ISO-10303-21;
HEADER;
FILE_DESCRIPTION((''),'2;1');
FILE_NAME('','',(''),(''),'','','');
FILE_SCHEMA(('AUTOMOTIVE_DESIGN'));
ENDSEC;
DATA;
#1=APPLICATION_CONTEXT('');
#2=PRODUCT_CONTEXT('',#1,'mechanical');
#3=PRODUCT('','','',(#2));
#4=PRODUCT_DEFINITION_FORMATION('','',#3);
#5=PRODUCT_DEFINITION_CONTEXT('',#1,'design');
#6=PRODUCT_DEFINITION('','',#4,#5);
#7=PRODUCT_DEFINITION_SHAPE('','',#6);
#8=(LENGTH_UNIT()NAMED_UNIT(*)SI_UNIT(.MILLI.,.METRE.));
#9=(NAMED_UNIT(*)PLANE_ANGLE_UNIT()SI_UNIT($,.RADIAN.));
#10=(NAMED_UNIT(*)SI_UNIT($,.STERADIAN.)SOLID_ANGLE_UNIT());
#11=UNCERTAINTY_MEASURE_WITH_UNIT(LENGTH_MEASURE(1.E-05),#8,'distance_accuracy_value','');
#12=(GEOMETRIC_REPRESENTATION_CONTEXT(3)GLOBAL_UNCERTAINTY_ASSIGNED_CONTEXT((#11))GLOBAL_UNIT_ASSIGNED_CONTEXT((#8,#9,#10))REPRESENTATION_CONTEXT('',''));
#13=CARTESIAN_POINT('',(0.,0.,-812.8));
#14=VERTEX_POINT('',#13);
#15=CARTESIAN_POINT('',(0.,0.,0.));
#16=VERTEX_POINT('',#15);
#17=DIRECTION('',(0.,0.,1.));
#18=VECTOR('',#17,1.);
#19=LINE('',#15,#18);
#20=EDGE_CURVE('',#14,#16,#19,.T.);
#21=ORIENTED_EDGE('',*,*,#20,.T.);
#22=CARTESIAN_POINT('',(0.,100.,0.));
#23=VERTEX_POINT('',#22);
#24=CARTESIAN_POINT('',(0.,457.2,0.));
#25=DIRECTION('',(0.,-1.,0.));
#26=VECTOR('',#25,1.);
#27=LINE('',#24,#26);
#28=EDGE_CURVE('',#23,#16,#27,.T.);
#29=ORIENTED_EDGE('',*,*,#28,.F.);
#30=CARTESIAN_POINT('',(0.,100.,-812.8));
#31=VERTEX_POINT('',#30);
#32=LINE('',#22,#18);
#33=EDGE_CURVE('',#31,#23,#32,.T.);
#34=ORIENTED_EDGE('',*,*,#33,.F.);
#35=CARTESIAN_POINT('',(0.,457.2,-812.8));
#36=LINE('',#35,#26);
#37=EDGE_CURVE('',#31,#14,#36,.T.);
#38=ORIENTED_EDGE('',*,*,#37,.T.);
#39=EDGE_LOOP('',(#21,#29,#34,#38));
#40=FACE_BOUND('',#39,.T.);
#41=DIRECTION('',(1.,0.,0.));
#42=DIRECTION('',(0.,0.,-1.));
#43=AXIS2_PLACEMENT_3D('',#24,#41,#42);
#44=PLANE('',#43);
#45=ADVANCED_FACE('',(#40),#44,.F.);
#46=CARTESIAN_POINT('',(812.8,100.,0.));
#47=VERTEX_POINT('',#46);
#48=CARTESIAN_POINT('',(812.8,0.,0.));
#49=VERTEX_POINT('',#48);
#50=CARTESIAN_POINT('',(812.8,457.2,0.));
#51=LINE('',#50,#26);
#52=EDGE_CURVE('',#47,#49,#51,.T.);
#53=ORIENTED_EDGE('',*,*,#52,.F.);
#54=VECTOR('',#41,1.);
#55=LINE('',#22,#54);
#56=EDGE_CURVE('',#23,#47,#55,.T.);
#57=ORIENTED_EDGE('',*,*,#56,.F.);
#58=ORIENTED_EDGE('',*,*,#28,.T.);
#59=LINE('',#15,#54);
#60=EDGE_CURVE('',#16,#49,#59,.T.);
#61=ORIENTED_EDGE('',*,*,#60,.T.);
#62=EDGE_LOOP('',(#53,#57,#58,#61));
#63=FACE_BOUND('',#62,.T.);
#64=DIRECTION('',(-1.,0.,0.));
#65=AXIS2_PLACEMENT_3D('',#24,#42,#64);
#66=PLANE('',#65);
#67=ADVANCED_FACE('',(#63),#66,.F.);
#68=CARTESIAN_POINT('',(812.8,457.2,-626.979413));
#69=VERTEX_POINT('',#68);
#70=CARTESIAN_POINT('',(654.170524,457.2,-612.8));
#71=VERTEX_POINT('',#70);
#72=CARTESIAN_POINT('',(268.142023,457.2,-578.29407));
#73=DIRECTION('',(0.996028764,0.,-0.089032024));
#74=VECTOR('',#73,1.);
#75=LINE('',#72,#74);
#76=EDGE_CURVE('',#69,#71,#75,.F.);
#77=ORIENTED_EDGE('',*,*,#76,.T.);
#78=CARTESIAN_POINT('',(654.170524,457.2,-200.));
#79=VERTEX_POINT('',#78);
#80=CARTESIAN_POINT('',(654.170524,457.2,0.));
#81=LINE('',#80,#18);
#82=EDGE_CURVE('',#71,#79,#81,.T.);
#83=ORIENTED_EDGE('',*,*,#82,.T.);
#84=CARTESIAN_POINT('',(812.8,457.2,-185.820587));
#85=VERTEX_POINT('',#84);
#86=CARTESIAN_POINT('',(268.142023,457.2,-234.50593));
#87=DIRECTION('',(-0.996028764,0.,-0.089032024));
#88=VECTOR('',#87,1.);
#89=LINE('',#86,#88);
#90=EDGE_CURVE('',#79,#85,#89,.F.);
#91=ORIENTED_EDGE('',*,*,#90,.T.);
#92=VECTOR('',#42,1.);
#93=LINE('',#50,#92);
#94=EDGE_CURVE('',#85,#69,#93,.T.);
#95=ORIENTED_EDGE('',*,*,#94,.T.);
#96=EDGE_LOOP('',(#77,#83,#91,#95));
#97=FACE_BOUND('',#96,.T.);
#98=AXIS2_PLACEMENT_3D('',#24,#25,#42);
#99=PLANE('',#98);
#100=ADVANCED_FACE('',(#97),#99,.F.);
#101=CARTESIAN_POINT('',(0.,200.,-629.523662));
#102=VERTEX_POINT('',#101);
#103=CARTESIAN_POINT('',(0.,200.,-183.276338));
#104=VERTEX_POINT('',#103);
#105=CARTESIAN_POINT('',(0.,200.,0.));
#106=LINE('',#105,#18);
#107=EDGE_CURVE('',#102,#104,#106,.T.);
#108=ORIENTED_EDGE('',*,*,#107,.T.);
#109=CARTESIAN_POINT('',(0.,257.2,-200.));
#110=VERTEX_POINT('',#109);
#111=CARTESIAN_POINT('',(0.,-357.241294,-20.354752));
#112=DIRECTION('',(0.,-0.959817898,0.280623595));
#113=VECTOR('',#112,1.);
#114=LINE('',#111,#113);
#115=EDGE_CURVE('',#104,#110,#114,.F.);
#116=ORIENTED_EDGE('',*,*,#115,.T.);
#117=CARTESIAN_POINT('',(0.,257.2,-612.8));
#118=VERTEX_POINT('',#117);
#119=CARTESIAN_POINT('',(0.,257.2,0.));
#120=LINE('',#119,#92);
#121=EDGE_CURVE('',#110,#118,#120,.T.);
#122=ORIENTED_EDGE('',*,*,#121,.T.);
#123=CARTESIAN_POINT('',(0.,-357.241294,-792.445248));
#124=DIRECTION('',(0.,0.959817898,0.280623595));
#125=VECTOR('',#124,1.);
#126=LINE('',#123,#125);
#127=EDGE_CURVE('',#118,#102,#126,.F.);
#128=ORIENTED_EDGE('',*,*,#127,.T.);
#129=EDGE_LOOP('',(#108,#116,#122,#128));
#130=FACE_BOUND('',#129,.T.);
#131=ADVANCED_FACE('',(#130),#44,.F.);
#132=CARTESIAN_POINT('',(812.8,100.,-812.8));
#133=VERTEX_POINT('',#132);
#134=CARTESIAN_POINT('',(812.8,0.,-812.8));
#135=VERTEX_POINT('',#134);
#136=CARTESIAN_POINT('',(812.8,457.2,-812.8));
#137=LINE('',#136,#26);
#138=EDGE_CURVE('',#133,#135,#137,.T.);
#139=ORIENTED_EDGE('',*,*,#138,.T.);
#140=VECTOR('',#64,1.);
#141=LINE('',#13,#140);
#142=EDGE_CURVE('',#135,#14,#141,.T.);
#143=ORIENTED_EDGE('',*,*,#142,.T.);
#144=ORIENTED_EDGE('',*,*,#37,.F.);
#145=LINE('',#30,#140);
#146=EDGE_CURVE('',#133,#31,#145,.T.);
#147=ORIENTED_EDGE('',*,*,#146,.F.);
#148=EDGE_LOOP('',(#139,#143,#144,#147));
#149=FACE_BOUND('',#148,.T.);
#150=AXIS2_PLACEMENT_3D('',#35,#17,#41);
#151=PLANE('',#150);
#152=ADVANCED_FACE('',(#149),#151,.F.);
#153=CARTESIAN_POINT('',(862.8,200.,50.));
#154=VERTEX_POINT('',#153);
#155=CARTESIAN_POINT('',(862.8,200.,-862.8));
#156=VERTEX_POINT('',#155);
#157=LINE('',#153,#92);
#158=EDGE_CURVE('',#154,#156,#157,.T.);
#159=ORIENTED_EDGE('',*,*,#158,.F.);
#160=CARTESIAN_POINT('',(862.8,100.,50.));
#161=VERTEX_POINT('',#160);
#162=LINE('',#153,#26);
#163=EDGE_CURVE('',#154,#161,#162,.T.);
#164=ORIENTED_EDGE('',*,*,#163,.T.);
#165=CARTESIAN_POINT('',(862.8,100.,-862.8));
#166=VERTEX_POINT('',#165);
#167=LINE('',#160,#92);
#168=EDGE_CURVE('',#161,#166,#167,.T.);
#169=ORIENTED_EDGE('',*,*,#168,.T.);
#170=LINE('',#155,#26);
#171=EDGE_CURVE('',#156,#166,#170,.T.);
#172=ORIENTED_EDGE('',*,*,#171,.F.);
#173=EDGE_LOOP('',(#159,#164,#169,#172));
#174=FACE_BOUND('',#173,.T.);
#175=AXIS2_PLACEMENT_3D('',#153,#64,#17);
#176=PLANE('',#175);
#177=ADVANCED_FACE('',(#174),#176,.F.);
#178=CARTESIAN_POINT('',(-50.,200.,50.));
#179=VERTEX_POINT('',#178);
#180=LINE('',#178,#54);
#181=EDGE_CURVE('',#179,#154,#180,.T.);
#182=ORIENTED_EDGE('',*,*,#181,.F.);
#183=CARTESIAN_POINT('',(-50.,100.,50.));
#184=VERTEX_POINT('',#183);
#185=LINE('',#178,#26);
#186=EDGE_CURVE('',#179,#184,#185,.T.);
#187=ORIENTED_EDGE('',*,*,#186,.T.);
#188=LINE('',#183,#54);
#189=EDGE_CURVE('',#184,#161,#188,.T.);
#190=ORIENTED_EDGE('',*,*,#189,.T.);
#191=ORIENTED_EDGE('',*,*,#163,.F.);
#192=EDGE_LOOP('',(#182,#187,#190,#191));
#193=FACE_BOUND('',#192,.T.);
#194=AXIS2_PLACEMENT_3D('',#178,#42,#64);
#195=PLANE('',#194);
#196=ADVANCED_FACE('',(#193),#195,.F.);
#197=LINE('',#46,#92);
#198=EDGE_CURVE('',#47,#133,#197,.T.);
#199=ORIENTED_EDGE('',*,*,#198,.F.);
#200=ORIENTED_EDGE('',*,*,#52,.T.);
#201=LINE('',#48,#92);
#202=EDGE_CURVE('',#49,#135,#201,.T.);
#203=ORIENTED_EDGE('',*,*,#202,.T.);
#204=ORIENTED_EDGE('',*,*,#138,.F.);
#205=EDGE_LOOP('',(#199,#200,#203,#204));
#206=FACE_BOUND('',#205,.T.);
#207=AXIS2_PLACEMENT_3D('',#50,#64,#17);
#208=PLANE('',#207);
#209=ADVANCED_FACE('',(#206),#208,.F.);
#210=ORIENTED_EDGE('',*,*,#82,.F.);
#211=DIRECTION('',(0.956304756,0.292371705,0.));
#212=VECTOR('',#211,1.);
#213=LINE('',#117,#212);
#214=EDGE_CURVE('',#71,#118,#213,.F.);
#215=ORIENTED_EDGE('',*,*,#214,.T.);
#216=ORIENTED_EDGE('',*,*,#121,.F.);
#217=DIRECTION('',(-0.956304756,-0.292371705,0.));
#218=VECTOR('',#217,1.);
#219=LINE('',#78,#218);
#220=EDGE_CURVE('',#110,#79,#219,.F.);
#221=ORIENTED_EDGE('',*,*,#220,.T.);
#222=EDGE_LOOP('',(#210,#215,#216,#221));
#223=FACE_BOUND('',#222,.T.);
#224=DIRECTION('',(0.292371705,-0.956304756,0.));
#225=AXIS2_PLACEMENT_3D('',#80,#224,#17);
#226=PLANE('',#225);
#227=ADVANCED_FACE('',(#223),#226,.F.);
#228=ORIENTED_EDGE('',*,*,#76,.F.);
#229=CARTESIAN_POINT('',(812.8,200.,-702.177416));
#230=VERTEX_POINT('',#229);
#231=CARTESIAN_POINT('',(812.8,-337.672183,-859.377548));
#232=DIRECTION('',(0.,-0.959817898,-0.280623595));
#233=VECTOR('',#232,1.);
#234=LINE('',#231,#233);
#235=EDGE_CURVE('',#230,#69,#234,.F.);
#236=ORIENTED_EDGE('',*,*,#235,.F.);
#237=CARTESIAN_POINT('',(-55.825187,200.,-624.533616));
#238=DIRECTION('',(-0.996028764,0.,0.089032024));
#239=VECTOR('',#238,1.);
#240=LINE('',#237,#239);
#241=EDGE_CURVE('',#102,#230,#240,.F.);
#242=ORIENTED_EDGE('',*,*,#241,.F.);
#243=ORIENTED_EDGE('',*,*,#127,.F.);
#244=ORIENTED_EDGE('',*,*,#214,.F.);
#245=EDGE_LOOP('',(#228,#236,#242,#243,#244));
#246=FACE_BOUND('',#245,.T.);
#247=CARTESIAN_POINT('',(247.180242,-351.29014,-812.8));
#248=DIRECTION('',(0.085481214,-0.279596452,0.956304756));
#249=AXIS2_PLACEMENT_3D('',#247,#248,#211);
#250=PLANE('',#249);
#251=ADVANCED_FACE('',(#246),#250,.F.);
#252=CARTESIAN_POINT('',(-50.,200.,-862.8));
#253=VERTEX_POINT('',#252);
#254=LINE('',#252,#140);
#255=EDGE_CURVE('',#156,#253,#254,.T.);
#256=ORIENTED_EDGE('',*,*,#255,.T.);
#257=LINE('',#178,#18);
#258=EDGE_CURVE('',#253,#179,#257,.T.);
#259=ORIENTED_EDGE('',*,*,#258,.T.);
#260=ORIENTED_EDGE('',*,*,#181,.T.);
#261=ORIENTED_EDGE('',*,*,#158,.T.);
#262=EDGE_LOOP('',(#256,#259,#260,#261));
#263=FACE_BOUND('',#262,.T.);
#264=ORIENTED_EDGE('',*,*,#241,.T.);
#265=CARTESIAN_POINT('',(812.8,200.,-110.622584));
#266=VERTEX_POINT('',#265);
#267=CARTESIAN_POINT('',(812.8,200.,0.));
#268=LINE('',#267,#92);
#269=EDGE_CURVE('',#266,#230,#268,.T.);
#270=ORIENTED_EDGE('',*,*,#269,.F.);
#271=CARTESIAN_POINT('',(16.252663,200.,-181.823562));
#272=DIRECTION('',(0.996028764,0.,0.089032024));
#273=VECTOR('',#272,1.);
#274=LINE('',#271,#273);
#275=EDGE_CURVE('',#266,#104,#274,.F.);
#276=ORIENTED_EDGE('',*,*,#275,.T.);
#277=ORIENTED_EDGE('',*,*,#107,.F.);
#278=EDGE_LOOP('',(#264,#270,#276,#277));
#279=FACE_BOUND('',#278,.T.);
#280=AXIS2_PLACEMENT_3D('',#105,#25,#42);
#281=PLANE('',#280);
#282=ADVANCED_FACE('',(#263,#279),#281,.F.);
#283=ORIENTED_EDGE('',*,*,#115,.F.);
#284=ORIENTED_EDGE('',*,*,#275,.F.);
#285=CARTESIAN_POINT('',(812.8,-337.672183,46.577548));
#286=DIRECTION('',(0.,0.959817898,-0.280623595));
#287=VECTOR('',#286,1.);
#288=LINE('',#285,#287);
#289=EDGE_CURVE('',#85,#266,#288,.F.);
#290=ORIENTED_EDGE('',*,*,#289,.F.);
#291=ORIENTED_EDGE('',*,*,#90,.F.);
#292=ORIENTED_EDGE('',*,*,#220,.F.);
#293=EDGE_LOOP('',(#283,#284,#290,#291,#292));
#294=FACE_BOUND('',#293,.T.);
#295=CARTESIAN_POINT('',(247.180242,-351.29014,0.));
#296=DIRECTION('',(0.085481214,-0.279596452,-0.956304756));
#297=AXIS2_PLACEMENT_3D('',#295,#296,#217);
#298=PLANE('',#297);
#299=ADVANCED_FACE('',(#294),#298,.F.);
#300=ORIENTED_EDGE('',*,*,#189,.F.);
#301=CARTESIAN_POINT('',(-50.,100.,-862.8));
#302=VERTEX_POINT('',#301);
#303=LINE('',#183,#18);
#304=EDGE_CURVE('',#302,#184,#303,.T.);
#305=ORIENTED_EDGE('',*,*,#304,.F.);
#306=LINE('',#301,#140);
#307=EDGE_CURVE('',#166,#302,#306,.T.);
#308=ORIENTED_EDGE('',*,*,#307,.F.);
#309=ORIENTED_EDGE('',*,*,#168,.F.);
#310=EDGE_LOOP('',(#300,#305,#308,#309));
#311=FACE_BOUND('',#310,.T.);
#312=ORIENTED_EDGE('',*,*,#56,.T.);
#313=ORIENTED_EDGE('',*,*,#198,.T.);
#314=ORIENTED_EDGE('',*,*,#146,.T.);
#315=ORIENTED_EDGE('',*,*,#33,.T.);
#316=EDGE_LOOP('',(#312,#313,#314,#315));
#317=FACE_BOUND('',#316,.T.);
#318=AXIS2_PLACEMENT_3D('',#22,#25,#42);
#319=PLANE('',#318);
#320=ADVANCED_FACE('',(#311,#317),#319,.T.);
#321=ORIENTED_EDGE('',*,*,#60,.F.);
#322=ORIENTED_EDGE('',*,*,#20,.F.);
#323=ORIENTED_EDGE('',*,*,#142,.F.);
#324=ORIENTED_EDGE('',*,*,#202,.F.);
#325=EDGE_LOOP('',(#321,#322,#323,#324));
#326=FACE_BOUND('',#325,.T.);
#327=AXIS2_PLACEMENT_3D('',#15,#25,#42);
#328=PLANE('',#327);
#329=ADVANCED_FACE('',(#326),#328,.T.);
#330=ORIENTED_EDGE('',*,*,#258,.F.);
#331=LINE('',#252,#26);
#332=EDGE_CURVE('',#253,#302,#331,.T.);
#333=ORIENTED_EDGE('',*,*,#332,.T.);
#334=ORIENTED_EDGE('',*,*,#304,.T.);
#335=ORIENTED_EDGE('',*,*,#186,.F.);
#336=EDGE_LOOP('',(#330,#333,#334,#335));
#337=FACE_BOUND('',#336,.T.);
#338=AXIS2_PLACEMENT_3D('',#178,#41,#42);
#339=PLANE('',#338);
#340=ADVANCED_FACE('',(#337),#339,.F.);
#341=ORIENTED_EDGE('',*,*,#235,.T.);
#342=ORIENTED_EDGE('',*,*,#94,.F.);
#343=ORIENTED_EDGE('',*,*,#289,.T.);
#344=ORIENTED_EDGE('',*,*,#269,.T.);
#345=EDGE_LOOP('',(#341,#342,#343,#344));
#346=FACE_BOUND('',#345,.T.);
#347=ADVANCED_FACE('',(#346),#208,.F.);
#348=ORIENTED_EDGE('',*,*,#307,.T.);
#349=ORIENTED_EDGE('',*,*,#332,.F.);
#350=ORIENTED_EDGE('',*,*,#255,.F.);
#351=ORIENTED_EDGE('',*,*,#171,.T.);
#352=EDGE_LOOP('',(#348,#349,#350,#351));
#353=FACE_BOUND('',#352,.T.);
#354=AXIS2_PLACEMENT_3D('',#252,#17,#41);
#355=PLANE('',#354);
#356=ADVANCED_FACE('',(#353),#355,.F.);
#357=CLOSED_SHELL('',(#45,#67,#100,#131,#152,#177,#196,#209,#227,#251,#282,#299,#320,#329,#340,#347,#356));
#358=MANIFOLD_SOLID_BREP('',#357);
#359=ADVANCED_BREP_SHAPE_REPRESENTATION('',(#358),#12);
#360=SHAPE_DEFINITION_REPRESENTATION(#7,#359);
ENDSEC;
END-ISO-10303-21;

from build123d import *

# Parameters (mm, degrees)
SKETCH2_W           = 812.8
SKETCH2_H           = 812.8
BOSS_EXTRUDE1_DEPTH = 457.2
SKETCH3_W           = 912.8
SKETCH3_H           = 912.8
SKETCH3_W_2         = 812.8
SKETCH3_H_2         = 812.8
BOSS_EXTRUDE2_DEPTH = 100
CHAMFER4_SIZE       = 200
CHAMFER4_SIZE2      = 654.170523697
CHAMFER5_SIZE       = 200
CHAMFER5_SIZE_2     = 654.170523697


with BuildPart() as part:
    # Sketch2 → Boss-Extrude1 (new body)
    with BuildSketch(Plane(origin=(0, 0, 0), x_dir=(1, 0, 0), z_dir=(0, 1, 0))):
        with Locations((406.4, 406.4)):
            Rectangle(SKETCH2_W, SKETCH2_H)
    extrude(amount=BOSS_EXTRUDE1_DEPTH)

    # Sketch3 → Boss-Extrude2 (add)
    with BuildSketch(Plane(origin=(0, 100, 0), x_dir=(1, 0, 0), z_dir=(0, 1, 0))):
        with Locations((406.4, 406.4)):
            Rectangle(SKETCH3_W, SKETCH3_H)
        with Locations((406.4, 406.4)):
            Rectangle(SKETCH3_W_2, SKETCH3_H_2, mode=Mode.SUBTRACT)
    extrude(amount=BOSS_EXTRUDE2_DEPTH)

    # Chamfer4
    chamfer4_edges = [part.edges().sort_by_distance(p)[0] for p in [
        (0, 457.2, -406.4),
    ]]
    chamfer4_side = [part.faces().sort_by_distance(p)[0] for p in [
        (0, 328.6, -406.4),
    ]]
    chamfer(chamfer4_edges, length=CHAMFER4_SIZE, length2=CHAMFER4_SIZE2, reference=chamfer4_side[0])

    # Chamfer5
    # the kernel refuses this chamfer: 654.170523697, 200 mm, written as the material it takes off along each edge
    with BuildSketch(Plane(origin=(-1623.89408898, -239.27424644, -812.8), x_dir=(-0.03497993633861633, 0.11441421636757278, 0.9928170985366542), z_dir=(0.9563047559630362, 0.2923717047227344, 0))) as chamfer5_piece_1_section:
        Polygon((CHAMFER5_SIZE * 0.992817098537, CHAMFER5_SIZE * 0.119642002881), (-CHAMFER5_SIZE_2 * 0.11964200288, CHAMFER5_SIZE_2 * 0.992817098536), (0, 0), align=None)
    chamfer5_piece_1 = extrude(amount=4080.246048475, mode=Mode.PRIVATE)
    chamfer5_piece_1 = split(chamfer5_piece_1, bisect_by=Plane(origin=(478.445479778, 200, -727.207473948), z_dir=(0, 1, 0)), keep=Keep.TOP, mode=Mode.PRIVATE)
    add(chamfer5_piece_1, mode=Mode.SUBTRACT)
    with BuildSketch(Plane(origin=(-1623.89408898, -239.27424644, 0), x_dir=(0.2923531587775955, -0.9562440949098164, 0.011263281176818211), z_dir=(0.9563047559630362, 0.2923717047227344, 0))) as chamfer5_piece_2_section:
        Polygon((CHAMFER5_SIZE_2 * 0.999936567236, CHAMFER5_SIZE_2 * 0.0112632811768), (-CHAMFER5_SIZE * 0.0112632811768, CHAMFER5_SIZE * 0.999936567237), (0, 0), align=None)
    chamfer5_piece_2 = extrude(amount=4080.246048475, mode=Mode.PRIVATE)
    chamfer5_piece_2 = split(chamfer5_piece_2, bisect_by=Plane(origin=(478.445479778, 200, -85.592526052), z_dir=(0, 1, 0)), keep=Keep.TOP, mode=Mode.PRIVATE)
    add(chamfer5_piece_2, mode=Mode.SUBTRACT)


solid = part.part
